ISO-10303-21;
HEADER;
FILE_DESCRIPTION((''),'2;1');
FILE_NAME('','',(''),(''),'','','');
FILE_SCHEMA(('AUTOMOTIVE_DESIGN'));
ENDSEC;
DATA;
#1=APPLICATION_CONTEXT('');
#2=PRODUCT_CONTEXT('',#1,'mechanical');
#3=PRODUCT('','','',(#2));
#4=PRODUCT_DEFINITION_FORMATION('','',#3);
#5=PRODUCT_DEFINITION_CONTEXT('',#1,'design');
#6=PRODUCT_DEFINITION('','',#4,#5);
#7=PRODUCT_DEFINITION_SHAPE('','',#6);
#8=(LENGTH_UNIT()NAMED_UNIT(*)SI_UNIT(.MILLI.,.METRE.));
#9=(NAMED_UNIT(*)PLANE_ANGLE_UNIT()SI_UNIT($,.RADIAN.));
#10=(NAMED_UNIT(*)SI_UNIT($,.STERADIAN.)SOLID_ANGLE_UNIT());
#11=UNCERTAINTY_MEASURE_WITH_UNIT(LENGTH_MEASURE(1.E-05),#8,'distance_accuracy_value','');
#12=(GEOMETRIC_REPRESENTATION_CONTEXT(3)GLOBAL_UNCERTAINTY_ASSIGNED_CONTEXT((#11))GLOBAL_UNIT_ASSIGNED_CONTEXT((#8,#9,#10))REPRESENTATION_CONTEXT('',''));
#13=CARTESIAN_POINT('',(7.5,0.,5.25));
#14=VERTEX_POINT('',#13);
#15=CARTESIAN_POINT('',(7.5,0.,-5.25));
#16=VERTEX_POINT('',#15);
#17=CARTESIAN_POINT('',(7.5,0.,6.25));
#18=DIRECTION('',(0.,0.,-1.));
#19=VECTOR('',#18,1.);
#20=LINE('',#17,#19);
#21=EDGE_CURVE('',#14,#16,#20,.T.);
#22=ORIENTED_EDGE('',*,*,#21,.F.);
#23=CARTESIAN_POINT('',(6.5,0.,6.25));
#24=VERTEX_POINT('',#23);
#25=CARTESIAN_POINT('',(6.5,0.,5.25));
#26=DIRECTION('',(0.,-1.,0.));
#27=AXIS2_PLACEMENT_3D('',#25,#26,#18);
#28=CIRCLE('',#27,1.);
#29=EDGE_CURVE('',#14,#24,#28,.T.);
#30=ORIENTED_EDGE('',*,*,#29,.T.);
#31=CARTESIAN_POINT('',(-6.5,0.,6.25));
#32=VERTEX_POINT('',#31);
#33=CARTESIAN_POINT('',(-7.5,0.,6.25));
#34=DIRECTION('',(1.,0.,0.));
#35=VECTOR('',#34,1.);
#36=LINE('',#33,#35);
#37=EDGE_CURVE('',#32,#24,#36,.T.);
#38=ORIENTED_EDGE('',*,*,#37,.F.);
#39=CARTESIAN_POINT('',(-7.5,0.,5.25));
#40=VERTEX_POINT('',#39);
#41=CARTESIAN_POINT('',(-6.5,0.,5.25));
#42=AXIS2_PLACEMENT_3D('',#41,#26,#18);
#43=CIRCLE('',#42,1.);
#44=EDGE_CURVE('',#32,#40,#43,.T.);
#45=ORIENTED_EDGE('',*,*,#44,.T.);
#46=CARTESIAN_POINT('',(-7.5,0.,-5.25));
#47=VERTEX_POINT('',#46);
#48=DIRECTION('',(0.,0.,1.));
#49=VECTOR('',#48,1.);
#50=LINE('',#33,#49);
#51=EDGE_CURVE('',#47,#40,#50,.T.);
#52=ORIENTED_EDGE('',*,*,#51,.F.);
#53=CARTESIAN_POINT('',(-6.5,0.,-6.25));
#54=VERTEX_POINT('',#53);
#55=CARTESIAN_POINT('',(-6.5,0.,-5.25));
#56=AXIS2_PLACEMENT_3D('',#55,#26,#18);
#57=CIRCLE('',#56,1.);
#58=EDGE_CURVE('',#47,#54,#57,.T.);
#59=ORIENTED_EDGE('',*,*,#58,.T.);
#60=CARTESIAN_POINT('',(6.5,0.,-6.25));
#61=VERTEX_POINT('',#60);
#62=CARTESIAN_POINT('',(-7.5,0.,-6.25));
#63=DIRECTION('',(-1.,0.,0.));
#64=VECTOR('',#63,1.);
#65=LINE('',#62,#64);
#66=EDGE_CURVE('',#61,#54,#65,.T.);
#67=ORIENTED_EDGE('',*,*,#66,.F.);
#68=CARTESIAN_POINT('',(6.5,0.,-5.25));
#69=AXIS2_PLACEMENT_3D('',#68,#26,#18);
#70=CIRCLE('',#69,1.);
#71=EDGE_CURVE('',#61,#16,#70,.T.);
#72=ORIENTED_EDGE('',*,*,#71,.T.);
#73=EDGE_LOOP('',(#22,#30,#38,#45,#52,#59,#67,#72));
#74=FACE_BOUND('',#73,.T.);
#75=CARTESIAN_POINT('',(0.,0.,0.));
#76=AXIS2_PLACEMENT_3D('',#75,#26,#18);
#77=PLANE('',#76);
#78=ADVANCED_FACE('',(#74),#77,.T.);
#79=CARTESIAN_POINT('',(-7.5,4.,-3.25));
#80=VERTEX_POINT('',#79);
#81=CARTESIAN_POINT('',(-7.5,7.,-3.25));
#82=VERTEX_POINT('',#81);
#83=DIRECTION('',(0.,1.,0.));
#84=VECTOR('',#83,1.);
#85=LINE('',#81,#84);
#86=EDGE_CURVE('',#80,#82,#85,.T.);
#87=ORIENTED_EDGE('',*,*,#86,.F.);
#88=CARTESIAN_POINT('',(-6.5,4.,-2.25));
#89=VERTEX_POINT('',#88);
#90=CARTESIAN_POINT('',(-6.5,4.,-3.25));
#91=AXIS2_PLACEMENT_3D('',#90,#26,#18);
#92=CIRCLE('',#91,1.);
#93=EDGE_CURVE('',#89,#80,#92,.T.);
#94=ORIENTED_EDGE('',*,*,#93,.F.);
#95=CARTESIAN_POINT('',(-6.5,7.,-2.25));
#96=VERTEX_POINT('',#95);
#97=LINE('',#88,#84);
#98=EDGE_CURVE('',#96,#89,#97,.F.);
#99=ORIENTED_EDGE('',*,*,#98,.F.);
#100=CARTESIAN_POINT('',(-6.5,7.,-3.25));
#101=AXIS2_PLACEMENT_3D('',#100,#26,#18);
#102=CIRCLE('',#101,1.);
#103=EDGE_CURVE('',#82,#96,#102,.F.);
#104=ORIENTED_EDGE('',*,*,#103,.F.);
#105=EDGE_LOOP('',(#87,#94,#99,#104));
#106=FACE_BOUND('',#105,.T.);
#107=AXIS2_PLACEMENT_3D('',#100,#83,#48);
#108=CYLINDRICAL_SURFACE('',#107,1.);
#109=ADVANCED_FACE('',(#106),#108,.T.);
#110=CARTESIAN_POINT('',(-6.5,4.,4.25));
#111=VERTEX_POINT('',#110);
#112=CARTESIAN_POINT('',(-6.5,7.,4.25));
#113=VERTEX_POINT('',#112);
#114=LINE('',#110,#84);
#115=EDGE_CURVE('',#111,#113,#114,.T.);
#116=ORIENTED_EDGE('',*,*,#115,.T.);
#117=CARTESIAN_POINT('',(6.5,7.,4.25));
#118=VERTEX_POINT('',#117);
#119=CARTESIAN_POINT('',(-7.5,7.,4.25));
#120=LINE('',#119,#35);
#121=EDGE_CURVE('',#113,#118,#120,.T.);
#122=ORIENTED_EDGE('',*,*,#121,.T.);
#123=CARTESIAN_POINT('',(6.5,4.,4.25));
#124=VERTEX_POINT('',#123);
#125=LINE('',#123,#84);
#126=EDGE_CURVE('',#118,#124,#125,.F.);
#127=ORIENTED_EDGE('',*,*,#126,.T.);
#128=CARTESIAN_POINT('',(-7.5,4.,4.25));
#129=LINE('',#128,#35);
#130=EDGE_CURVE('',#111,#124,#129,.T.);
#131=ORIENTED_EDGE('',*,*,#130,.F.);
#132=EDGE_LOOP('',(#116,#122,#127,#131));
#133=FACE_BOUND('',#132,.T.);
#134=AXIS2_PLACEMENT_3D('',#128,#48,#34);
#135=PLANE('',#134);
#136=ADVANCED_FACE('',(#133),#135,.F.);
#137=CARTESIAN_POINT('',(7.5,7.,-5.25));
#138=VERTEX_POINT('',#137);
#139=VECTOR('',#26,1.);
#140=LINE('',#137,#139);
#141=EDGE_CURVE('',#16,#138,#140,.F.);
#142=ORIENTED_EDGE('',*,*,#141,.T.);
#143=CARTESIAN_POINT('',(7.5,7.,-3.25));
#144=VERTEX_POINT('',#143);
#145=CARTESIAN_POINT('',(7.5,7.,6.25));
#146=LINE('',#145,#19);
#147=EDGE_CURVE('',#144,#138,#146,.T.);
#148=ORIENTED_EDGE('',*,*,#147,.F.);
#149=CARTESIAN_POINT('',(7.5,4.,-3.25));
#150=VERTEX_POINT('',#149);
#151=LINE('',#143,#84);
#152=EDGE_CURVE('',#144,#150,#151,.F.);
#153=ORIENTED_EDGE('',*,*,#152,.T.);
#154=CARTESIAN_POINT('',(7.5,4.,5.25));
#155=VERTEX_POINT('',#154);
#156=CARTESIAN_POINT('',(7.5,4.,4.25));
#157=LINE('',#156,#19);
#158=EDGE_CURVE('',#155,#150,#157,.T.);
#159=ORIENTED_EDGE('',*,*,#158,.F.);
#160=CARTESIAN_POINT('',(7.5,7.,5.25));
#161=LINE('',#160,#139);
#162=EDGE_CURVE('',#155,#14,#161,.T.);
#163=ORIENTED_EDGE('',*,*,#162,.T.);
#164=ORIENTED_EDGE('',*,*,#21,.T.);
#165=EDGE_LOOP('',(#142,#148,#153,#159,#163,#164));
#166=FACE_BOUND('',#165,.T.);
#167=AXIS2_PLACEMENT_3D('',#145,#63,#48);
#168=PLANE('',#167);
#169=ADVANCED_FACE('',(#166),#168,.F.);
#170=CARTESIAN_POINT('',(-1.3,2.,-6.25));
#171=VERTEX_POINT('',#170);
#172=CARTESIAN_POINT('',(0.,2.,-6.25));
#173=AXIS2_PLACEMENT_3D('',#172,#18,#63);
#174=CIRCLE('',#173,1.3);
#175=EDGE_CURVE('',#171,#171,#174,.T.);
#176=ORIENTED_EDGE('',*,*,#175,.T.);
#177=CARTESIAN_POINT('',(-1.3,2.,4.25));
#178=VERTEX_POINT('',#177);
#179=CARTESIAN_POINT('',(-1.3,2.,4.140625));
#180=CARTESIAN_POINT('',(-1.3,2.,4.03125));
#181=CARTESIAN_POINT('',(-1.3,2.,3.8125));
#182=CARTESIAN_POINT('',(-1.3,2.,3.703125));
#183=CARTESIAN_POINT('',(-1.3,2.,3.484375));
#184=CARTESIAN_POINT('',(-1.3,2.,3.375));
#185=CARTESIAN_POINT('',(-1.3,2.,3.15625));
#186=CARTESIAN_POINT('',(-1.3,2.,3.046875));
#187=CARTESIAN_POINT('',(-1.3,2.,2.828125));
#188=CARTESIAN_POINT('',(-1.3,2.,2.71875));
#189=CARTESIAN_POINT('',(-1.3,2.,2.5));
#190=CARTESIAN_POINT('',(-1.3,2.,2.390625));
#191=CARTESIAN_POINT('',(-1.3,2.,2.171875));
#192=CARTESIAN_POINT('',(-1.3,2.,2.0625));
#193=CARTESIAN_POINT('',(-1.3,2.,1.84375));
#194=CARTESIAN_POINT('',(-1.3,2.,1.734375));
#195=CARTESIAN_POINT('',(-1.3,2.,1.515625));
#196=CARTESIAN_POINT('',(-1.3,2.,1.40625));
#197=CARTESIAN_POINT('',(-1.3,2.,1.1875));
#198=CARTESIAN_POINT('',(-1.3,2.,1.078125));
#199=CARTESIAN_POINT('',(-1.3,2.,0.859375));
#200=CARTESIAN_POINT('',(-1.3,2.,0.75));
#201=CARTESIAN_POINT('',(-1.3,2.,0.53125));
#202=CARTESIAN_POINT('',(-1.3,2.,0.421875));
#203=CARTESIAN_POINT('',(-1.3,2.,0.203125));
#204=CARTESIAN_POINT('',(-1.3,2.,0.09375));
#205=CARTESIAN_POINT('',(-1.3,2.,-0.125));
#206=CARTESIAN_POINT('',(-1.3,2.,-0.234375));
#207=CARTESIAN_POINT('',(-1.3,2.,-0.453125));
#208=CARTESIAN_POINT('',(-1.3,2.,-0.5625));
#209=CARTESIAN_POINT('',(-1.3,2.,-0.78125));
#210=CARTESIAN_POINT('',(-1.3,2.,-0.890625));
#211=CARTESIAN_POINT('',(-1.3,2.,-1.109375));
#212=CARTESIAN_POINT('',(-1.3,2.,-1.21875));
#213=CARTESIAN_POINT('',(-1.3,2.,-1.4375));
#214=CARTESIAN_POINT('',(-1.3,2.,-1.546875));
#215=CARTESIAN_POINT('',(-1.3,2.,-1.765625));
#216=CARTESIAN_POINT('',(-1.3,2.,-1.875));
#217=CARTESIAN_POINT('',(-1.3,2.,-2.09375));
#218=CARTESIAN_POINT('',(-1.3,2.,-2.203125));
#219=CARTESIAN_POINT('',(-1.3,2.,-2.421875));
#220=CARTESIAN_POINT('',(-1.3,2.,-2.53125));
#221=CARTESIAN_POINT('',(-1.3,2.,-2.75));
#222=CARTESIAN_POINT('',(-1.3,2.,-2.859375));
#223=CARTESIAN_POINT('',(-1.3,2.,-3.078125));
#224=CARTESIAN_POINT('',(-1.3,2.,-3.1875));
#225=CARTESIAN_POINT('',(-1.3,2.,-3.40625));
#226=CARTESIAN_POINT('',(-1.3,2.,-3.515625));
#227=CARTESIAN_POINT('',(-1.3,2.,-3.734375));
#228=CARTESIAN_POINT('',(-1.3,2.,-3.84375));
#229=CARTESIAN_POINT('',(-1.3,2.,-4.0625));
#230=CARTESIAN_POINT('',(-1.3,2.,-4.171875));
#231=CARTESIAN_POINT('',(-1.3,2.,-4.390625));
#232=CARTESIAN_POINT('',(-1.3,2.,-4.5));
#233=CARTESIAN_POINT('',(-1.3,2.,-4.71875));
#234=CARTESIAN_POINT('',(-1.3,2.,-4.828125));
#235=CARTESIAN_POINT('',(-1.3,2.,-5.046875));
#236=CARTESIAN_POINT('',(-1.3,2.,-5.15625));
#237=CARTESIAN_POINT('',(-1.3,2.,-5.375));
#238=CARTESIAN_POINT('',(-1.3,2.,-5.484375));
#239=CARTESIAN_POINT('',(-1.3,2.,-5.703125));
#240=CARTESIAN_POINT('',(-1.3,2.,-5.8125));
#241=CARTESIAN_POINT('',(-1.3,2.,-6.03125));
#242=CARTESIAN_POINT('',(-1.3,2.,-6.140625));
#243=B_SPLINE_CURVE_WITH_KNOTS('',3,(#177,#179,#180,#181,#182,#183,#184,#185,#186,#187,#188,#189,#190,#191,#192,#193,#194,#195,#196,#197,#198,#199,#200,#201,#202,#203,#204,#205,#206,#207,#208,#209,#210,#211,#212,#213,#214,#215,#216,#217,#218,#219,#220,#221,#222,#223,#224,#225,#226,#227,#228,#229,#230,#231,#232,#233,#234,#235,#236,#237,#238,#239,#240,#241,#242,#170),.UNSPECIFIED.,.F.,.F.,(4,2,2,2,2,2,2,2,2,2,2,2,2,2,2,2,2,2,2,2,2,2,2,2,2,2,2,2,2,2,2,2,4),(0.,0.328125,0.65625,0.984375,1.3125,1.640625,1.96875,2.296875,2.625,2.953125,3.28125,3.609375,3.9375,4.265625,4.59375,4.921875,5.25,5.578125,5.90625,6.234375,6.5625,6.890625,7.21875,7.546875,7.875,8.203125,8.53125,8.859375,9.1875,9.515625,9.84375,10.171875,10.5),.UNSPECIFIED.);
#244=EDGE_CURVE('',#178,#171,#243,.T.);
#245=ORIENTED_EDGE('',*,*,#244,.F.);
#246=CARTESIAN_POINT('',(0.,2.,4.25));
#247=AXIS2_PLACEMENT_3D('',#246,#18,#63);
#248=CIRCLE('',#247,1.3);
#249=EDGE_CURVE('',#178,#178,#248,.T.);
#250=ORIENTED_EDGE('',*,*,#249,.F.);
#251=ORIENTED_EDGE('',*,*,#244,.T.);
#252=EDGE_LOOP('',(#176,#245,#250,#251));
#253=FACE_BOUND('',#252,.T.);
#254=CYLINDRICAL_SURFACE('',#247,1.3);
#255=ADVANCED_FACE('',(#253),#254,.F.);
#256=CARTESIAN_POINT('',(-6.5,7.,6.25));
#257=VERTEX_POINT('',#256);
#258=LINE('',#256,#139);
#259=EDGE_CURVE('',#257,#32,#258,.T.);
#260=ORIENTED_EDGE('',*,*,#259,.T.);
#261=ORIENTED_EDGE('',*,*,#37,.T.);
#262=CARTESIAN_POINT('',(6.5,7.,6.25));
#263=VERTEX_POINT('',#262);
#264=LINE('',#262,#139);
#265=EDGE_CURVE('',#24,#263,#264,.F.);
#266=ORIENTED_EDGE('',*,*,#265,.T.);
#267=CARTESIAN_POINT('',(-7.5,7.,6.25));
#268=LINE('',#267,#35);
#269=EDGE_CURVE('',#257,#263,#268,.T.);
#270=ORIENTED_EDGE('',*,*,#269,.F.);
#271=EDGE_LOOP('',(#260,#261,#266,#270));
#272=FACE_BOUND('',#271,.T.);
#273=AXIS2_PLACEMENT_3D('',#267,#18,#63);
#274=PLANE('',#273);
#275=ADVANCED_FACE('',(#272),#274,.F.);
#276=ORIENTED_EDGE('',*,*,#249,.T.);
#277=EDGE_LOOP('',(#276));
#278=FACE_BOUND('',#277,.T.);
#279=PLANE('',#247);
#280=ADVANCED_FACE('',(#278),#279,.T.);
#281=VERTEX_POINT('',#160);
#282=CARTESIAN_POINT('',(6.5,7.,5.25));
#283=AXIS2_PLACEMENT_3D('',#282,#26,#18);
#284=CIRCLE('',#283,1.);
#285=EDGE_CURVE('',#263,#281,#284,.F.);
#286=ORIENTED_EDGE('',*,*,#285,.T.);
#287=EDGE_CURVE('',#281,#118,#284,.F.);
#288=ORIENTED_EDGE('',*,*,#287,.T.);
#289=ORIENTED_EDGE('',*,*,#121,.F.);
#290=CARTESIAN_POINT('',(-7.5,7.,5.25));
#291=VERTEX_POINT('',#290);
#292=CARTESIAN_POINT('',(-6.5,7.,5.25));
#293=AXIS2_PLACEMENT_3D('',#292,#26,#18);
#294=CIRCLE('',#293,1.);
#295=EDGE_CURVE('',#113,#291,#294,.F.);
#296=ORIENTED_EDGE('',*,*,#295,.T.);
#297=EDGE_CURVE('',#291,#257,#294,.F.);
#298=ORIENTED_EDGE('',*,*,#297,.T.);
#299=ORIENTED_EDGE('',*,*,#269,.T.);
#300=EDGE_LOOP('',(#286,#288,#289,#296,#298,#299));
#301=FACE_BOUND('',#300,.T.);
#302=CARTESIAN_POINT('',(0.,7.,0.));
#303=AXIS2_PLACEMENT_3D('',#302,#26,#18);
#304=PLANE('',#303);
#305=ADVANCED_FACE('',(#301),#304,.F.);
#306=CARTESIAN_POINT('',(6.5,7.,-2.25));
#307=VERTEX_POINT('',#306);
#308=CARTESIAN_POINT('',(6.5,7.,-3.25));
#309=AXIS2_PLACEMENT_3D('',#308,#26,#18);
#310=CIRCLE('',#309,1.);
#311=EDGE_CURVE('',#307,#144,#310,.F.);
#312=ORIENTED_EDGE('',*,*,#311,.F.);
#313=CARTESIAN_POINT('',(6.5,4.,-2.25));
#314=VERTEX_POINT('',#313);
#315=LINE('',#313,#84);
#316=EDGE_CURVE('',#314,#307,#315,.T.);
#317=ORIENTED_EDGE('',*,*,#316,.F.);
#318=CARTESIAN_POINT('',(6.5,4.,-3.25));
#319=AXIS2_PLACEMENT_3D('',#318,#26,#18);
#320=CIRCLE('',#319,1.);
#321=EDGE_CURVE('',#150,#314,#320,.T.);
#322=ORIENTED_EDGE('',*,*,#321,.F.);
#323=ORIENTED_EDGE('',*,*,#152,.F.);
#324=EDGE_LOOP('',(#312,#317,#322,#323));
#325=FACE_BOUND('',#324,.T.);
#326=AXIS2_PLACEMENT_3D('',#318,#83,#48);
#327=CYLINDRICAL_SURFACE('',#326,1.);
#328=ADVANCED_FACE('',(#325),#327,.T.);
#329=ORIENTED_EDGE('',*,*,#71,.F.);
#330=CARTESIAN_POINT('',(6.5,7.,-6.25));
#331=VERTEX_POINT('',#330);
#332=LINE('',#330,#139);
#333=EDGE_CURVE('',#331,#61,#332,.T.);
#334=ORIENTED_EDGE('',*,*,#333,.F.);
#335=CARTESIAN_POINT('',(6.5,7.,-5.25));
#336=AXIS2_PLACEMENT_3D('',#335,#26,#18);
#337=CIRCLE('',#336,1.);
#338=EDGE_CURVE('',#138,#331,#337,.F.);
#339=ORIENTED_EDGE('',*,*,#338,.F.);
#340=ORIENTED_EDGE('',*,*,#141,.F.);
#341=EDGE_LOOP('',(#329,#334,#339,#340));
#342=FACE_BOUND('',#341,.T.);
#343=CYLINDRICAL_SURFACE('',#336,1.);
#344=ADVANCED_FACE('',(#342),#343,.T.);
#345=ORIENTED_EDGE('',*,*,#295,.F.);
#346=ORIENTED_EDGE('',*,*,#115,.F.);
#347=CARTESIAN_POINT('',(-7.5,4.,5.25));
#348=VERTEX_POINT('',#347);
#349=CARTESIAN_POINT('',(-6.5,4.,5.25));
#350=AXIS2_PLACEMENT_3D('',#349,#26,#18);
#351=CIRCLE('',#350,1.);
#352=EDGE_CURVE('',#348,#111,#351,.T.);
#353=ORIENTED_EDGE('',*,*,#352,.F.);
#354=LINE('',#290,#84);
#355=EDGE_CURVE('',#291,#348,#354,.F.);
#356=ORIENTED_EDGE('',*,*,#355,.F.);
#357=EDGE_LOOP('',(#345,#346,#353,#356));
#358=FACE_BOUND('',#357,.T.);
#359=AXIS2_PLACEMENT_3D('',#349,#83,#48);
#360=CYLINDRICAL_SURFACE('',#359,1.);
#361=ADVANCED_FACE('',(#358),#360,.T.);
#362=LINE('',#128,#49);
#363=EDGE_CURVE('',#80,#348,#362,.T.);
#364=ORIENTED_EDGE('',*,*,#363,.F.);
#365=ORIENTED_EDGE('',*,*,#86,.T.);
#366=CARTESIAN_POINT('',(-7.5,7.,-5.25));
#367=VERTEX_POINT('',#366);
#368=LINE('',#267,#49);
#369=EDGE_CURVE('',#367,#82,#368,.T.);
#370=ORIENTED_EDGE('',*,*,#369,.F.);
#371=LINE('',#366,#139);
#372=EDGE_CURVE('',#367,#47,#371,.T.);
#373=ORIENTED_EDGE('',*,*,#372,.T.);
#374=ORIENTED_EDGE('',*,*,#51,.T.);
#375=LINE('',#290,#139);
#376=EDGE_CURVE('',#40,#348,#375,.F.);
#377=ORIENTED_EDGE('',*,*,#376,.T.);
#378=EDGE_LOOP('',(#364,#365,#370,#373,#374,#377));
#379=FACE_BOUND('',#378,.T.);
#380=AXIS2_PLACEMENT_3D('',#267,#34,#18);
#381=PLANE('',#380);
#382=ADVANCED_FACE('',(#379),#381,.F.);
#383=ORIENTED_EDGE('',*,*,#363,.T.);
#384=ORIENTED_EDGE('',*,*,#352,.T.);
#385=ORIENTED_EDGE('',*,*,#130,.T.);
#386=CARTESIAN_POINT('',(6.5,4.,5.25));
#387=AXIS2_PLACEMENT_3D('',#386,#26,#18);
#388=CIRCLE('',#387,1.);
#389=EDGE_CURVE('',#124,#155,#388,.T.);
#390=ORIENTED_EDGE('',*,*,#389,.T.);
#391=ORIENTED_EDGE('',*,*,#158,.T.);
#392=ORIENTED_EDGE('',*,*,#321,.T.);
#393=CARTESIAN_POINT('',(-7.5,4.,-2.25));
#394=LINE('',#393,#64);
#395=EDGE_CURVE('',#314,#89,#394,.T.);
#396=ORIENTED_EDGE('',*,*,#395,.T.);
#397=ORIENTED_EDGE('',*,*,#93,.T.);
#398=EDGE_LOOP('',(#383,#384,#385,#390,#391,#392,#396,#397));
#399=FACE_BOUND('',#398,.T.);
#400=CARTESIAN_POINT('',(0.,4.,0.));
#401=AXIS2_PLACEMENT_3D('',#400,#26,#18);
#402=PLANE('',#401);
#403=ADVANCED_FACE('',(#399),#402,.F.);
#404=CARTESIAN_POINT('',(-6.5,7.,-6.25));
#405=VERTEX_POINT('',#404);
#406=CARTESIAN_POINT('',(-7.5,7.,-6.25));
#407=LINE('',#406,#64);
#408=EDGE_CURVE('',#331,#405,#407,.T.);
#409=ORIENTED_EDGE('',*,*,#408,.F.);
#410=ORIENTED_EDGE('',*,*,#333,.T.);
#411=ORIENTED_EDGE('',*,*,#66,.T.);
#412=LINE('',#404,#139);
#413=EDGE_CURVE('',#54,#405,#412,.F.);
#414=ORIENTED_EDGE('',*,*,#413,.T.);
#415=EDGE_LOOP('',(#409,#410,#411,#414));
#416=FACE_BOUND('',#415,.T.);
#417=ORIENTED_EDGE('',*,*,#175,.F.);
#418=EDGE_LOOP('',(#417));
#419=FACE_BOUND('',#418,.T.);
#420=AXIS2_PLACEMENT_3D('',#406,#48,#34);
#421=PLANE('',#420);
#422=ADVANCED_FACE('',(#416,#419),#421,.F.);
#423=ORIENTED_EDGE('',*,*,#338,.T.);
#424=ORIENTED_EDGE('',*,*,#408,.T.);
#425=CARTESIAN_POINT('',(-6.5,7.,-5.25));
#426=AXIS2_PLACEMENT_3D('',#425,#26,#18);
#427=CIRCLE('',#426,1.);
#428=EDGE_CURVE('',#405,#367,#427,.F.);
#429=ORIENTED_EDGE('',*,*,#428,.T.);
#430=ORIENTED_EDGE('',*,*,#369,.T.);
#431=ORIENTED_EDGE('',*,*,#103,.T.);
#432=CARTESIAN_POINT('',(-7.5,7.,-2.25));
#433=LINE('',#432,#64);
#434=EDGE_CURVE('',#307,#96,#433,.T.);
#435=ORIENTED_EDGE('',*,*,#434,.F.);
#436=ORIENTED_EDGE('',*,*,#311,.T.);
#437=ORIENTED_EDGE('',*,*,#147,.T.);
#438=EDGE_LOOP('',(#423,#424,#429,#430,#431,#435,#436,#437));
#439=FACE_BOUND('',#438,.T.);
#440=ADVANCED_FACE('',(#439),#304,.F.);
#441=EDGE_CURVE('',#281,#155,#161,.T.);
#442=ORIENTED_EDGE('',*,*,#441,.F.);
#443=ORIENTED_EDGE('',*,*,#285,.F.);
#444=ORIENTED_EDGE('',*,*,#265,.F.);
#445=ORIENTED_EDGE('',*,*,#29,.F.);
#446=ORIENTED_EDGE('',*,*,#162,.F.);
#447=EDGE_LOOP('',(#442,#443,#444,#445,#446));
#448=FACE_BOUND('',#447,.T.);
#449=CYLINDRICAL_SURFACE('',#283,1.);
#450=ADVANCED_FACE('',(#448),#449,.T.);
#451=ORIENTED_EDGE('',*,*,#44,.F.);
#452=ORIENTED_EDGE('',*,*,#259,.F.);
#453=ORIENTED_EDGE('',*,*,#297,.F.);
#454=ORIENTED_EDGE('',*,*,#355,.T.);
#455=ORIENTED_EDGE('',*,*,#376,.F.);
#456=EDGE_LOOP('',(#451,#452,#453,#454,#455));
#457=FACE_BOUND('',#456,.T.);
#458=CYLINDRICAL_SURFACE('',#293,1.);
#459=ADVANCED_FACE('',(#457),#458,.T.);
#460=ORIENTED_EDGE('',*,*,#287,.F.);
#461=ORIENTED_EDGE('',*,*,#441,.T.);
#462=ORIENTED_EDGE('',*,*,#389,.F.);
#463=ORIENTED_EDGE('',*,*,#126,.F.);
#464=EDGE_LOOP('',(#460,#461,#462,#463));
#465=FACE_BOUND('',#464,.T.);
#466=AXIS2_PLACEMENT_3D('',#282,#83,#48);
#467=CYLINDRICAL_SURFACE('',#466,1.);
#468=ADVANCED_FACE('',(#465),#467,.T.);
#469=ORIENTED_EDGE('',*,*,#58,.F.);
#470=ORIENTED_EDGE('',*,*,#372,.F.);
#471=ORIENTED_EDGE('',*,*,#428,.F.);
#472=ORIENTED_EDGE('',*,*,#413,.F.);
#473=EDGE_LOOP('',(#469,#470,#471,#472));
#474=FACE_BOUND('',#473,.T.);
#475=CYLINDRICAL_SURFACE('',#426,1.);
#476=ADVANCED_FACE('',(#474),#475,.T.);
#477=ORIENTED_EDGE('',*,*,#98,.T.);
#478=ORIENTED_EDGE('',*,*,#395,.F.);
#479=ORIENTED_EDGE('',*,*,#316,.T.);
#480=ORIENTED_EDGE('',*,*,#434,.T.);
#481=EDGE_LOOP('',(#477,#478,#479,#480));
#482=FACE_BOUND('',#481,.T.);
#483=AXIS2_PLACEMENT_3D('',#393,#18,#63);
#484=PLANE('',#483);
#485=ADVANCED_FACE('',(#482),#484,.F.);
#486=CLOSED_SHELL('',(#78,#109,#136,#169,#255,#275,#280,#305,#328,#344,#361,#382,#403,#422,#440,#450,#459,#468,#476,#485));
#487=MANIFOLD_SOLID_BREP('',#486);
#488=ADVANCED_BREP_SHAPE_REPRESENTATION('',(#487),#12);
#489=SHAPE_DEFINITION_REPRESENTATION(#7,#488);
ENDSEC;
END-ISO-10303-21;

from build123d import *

# Parameters (mm, degrees)
SKETCH1_W           = 15
SKETCH1_H           = 12.5
BOSS_EXTRUDE1_DEPTH = 7
SKETCH2_W           = 15
SKETCH2_H           = 6.5
CUT_EXTRUDE2_DEPTH  = 3
SKETCH3_R           = 1.3
CUT_EXTRUDE3_DEPTH  = 10.5
FILLET1_R           = 1


with BuildPart() as part:
    # Sketch1 → Boss-Extrude1 (new body)
    with BuildSketch(Plane(origin=(0, 0, 0), x_dir=(1, 0, 0), z_dir=(0, 1, 0))):
        Rectangle(SKETCH1_W, SKETCH1_H)
    extrude(amount=BOSS_EXTRUDE1_DEPTH)

    # Sketch2 → Cut-Extrude2 (cut)
    with BuildSketch(Plane(origin=(0, 7, 0), x_dir=(1, 0, 0), z_dir=(0, 1, 0))):
        with Locations((0, -1)):
            Rectangle(SKETCH2_W, SKETCH2_H)
    extrude(amount=-CUT_EXTRUDE2_DEPTH, mode=Mode.SUBTRACT)

    # Sketch3 → Cut-Extrude3 (cut)
    with BuildSketch(Plane(origin=(0, 0, -6.25), x_dir=(-1, 0, 0), z_dir=(0, 0, -1))):
        with Locations((0, 2)):
            Circle(SKETCH3_R)
    extrude(amount=-CUT_EXTRUDE3_DEPTH, mode=Mode.SUBTRACT)

    # Fillet1
    fillet1_edges = [part.edges().sort_by_distance(p)[0] for p in [
        (7.5, 5.5, -2.25),
        (7.5, 5.5, 4.25),
        (-7.5, 5.5, 4.25),
        (-7.5, 5.5, -2.25),
        (7.5, 3.5, 6.25),
        (-7.5, 3.5, 6.25),
        (-7.5, 3.5, -6.25),
        (7.5, 3.5, -6.25),
    ]]
    fillet(fillet1_edges, radius=FILLET1_R - 0.0001)  # a hair under: the kernel refuses the full size


solid = part.part
